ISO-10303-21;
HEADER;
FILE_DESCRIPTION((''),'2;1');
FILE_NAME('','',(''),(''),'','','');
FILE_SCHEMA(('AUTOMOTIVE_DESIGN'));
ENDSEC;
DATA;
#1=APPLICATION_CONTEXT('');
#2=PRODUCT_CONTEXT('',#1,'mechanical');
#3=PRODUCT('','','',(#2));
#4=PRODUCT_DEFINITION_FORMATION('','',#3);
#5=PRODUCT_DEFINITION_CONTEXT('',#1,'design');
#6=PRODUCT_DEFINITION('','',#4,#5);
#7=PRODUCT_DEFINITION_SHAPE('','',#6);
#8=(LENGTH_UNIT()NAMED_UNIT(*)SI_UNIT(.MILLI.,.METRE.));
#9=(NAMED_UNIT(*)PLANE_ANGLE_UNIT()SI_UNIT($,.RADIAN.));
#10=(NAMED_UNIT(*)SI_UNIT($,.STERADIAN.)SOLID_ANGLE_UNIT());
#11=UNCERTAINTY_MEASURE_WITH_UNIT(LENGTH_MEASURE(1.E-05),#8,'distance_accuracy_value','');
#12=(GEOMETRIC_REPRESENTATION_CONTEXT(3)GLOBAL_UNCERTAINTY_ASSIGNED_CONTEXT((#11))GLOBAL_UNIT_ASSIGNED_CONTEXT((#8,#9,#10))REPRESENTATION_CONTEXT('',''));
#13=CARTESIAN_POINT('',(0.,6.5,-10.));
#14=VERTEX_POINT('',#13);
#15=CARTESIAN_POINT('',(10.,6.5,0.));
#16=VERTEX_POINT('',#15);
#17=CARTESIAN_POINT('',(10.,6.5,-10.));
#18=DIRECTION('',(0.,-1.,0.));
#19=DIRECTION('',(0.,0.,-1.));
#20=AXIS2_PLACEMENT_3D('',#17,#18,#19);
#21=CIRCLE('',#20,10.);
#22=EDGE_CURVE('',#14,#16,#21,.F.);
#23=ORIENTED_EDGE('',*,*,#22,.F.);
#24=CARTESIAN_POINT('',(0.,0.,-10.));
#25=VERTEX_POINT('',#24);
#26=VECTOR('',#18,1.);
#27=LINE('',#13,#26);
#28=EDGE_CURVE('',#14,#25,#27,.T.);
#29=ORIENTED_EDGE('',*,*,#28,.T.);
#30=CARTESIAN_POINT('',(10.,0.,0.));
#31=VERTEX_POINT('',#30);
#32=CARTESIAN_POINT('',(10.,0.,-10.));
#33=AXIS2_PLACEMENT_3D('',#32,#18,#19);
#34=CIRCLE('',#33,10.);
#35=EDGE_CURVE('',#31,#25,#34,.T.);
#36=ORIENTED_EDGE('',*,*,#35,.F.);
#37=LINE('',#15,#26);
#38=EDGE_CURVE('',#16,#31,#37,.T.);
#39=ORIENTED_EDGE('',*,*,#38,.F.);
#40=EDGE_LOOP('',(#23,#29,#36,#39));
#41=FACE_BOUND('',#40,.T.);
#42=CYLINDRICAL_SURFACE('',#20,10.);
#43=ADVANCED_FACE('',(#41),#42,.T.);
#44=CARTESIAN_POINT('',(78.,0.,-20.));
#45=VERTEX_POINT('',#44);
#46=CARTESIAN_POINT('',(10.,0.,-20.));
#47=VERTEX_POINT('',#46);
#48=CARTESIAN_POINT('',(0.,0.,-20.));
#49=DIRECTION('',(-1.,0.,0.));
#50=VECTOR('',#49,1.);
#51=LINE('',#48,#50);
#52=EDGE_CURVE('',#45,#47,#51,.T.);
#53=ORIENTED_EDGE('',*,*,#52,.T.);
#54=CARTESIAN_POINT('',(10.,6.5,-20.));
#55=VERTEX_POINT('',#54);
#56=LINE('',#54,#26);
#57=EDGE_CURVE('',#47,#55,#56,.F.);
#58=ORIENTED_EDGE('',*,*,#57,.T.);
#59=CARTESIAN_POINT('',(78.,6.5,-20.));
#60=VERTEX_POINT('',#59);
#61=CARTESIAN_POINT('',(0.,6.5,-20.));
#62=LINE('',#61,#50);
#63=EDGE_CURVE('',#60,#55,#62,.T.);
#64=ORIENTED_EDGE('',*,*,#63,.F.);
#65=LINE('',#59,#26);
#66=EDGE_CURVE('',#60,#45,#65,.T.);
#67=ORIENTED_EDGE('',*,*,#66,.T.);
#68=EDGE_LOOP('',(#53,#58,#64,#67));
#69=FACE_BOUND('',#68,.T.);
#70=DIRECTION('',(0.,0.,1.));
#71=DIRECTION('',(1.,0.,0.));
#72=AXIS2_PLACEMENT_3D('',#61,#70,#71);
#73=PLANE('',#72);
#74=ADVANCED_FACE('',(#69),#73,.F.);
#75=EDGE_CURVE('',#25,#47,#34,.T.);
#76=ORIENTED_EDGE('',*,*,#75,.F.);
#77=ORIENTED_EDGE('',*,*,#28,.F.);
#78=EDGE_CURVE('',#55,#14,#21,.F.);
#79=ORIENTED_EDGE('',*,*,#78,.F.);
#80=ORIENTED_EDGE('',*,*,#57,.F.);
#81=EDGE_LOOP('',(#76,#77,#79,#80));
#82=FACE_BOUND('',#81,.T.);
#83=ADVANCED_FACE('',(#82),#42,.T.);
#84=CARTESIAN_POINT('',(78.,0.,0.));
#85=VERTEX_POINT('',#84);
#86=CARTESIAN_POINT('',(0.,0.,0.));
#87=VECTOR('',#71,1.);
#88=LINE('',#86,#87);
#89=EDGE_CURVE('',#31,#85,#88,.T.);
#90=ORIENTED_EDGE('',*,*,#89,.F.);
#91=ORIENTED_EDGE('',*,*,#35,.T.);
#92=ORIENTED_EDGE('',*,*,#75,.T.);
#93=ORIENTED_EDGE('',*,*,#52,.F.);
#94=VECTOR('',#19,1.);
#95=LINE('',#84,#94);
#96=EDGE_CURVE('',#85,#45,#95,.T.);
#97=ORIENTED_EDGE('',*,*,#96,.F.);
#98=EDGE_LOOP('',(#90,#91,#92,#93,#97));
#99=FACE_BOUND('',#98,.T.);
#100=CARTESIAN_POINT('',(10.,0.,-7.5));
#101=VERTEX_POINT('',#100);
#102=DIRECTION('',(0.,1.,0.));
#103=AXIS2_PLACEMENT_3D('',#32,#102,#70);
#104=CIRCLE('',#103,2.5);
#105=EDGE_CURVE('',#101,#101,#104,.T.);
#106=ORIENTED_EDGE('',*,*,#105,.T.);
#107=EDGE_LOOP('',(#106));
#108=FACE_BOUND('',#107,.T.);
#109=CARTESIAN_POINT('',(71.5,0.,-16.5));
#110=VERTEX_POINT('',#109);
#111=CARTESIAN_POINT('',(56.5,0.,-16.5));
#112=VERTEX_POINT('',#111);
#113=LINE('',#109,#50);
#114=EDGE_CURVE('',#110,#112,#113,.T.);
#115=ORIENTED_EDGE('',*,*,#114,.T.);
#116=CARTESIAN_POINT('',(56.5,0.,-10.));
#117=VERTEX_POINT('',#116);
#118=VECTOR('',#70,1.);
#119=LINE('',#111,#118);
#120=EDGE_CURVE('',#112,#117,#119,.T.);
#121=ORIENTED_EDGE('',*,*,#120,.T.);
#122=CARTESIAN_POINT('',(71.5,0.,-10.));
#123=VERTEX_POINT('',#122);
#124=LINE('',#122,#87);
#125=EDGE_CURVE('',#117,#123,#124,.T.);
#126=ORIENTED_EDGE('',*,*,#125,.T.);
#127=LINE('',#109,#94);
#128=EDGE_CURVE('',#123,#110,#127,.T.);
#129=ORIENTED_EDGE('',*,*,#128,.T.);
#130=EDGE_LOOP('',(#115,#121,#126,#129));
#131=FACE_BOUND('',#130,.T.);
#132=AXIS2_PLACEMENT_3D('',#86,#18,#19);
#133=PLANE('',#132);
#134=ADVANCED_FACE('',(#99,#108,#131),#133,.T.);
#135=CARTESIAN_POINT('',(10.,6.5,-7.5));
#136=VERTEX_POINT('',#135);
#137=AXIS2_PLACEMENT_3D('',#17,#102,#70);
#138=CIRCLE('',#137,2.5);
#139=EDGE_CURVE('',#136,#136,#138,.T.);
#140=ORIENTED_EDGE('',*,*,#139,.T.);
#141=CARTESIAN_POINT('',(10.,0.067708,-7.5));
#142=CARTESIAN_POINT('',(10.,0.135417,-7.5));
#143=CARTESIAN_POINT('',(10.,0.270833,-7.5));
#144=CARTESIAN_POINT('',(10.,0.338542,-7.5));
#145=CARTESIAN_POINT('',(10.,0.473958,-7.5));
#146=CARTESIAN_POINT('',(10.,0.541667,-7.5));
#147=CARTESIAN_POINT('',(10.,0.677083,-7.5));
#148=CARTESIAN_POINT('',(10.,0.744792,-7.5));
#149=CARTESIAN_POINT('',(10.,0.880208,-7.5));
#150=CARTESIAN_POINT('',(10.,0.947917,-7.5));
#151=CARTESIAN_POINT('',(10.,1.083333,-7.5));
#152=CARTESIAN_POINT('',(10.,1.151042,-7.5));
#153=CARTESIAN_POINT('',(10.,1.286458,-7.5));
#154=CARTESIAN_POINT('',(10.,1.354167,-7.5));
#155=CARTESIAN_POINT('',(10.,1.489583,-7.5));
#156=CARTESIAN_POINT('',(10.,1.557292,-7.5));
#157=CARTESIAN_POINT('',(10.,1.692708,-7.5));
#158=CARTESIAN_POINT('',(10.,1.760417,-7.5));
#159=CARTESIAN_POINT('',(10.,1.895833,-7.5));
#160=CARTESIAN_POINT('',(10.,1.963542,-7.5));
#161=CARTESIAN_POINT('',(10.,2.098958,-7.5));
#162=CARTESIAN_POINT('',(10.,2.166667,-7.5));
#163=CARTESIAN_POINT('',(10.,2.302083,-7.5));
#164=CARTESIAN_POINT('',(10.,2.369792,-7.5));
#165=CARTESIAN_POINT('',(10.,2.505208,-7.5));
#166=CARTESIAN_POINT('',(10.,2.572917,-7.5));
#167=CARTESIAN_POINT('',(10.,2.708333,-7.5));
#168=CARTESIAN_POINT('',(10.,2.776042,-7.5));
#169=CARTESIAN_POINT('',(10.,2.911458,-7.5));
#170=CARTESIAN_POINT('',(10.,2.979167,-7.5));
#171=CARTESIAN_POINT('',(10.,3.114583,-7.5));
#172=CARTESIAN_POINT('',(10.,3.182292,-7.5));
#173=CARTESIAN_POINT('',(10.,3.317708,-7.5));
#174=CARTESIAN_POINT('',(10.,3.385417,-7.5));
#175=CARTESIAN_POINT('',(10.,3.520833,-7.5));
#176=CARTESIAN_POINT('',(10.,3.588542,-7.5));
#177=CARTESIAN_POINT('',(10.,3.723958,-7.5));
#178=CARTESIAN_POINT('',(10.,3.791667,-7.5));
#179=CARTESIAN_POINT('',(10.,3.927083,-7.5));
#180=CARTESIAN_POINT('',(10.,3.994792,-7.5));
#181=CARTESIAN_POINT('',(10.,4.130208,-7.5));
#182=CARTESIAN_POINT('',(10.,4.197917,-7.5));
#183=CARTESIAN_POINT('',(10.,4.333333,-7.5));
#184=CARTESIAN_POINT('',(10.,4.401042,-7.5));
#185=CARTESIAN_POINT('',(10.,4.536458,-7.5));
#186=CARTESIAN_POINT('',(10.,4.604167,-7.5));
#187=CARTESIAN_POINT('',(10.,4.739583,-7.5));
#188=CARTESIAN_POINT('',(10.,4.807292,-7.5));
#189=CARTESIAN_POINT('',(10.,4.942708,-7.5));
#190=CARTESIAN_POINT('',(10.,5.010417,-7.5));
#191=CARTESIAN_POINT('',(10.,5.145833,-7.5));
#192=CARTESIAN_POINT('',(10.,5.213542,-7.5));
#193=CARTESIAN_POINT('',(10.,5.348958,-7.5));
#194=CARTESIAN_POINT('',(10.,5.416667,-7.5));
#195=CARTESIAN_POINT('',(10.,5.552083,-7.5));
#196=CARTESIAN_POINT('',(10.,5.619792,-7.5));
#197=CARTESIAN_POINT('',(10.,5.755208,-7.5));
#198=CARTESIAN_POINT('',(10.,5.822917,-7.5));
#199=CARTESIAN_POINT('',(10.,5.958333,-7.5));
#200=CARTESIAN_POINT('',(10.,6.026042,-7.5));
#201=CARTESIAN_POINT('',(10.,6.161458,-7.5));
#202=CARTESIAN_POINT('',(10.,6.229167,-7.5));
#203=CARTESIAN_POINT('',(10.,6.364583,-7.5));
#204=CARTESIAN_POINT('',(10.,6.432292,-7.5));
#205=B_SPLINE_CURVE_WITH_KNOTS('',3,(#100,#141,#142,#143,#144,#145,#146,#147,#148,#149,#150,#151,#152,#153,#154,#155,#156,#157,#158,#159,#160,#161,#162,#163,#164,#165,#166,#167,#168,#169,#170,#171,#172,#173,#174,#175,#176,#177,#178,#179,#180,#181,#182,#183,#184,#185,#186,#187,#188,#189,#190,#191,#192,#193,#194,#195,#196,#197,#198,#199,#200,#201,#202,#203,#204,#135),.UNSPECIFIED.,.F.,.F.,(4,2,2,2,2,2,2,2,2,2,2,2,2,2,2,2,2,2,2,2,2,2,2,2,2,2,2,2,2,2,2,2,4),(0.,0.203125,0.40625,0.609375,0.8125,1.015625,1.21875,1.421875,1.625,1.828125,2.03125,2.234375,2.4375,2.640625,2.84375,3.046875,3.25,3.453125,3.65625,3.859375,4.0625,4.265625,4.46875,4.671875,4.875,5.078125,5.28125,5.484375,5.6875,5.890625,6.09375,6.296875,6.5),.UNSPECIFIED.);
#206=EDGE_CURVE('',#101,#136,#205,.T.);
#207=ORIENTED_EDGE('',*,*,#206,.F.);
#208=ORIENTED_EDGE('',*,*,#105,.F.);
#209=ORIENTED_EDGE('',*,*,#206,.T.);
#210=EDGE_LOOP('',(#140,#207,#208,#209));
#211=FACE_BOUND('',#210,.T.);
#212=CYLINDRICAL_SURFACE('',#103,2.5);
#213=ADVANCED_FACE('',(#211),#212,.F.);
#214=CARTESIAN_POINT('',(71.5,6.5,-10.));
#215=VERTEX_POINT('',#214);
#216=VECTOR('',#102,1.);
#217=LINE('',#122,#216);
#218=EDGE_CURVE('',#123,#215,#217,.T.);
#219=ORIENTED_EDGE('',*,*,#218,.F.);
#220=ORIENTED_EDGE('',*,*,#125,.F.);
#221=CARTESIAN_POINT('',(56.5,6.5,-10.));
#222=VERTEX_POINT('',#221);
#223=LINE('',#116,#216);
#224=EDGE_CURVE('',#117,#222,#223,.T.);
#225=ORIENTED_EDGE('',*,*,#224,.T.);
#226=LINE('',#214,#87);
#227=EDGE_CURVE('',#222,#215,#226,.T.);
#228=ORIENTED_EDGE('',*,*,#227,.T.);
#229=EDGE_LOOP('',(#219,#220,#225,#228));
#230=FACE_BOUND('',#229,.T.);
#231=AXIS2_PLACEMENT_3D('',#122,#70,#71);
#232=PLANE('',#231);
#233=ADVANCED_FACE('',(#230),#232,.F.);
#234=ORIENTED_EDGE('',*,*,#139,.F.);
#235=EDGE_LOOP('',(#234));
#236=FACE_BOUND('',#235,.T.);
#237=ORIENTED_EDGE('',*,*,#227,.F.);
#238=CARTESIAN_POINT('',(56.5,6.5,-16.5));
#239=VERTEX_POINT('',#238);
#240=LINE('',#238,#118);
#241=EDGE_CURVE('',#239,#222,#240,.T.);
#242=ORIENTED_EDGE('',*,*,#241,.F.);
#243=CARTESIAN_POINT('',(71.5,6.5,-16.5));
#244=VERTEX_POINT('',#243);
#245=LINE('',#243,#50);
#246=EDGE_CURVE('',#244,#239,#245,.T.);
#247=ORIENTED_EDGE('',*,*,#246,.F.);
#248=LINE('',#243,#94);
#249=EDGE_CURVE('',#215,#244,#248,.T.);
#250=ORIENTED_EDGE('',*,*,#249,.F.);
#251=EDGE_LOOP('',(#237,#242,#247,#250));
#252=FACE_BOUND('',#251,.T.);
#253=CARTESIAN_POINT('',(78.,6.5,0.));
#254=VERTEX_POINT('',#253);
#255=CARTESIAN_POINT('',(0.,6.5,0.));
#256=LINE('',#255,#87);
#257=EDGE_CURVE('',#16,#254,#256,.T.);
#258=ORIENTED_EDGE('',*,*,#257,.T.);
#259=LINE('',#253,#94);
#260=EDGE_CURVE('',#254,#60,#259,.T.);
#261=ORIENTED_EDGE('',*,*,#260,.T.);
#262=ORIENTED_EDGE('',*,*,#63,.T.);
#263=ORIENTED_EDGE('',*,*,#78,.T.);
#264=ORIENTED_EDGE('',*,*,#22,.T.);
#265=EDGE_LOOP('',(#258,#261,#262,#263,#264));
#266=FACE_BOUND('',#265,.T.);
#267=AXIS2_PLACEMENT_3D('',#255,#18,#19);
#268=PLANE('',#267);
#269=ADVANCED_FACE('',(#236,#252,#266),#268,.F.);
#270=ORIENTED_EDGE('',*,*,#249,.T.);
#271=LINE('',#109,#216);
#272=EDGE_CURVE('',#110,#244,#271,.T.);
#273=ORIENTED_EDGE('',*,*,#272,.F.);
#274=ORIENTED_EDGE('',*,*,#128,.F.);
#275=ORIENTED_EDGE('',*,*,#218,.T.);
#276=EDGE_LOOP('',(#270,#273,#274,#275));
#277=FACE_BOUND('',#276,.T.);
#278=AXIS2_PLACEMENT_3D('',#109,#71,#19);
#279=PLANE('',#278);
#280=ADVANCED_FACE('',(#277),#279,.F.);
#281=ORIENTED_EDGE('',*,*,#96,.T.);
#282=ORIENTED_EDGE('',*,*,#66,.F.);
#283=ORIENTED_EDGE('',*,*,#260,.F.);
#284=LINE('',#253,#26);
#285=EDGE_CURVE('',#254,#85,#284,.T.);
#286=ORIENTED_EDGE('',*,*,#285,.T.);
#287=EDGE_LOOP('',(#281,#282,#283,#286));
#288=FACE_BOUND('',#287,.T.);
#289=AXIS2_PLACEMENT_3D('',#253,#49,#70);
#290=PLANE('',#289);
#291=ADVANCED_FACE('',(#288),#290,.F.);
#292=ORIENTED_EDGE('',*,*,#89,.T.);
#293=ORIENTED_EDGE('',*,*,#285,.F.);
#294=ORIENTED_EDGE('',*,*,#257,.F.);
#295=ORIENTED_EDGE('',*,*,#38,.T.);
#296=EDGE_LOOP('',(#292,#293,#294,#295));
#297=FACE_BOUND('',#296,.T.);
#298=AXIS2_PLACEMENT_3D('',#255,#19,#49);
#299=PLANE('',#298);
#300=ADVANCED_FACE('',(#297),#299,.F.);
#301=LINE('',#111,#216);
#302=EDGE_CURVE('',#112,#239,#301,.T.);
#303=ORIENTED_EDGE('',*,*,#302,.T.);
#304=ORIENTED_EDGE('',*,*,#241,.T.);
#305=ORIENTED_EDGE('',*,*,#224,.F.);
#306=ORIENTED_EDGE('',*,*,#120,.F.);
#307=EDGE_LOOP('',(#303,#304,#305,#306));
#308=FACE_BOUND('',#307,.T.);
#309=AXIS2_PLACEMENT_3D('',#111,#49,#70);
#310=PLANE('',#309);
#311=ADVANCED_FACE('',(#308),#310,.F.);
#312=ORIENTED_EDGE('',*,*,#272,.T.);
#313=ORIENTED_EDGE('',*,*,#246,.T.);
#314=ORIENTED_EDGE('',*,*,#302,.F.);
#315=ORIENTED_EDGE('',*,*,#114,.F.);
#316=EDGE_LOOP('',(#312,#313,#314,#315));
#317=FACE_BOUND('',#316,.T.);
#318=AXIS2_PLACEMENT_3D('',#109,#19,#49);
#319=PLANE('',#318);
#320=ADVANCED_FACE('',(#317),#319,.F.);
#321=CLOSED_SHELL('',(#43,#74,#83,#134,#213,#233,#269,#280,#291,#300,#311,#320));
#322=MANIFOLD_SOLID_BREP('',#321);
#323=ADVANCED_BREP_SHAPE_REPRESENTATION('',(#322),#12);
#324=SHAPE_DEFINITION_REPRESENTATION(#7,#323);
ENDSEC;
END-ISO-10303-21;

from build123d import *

# Parameters (mm, degrees)
SKETCH1_W           = 78
SKETCH1_H           = 20
BOSS_EXTRUDE1_DEPTH = 6.5
SKETCH2_R           = 2.5
CUT_EXTRUDE1_DEPTH  = 81.785209042
SKETCH3_W           = 15
SKETCH3_H           = 6.5
CUT_EXTRUDE2_DEPTH  = 81.785209042
FILLET1_R           = 10


with BuildPart() as part:
    # Sketch1 → Boss-Extrude1 (new body)
    with BuildSketch(Plane(origin=(0, 0, 0), x_dir=(1, 0, 0), z_dir=(0, 1, 0))):
        with Locations((39, 10)):
            Rectangle(SKETCH1_W, SKETCH1_H)
    extrude(amount=BOSS_EXTRUDE1_DEPTH)

    # Sketch2 → Cut-Extrude1 (cut, through all)
    with BuildSketch(Plane(origin=(0, 6.5, 0), x_dir=(1, 0, 0), z_dir=(0, 1, 0))):
        with Locations(Location((10, 10, 0), (0, 0, 270))):
            Circle(SKETCH2_R)
    extrude(amount=-CUT_EXTRUDE1_DEPTH, mode=Mode.SUBTRACT)

    # Sketch3 → Cut-Extrude2 (cut, through all)
    with BuildSketch(Plane(origin=(0, 6.5, 0), x_dir=(1, 0, 0), z_dir=(0, 1, 0))):
        with Locations((64, 13.25)):
            Rectangle(SKETCH3_W, SKETCH3_H)
    extrude(amount=-CUT_EXTRUDE2_DEPTH, mode=Mode.SUBTRACT)

    # Fillet1
    fillet1_edges = [part.edges().sort_by_distance(p)[0] for p in [
        (0, 3.25, 0),
        (0, 3.25, -20),
    ]]
    fillet(fillet1_edges, radius=FILLET1_R - 0.0001)  # a hair under: the kernel refuses the full size


solid = part.part
